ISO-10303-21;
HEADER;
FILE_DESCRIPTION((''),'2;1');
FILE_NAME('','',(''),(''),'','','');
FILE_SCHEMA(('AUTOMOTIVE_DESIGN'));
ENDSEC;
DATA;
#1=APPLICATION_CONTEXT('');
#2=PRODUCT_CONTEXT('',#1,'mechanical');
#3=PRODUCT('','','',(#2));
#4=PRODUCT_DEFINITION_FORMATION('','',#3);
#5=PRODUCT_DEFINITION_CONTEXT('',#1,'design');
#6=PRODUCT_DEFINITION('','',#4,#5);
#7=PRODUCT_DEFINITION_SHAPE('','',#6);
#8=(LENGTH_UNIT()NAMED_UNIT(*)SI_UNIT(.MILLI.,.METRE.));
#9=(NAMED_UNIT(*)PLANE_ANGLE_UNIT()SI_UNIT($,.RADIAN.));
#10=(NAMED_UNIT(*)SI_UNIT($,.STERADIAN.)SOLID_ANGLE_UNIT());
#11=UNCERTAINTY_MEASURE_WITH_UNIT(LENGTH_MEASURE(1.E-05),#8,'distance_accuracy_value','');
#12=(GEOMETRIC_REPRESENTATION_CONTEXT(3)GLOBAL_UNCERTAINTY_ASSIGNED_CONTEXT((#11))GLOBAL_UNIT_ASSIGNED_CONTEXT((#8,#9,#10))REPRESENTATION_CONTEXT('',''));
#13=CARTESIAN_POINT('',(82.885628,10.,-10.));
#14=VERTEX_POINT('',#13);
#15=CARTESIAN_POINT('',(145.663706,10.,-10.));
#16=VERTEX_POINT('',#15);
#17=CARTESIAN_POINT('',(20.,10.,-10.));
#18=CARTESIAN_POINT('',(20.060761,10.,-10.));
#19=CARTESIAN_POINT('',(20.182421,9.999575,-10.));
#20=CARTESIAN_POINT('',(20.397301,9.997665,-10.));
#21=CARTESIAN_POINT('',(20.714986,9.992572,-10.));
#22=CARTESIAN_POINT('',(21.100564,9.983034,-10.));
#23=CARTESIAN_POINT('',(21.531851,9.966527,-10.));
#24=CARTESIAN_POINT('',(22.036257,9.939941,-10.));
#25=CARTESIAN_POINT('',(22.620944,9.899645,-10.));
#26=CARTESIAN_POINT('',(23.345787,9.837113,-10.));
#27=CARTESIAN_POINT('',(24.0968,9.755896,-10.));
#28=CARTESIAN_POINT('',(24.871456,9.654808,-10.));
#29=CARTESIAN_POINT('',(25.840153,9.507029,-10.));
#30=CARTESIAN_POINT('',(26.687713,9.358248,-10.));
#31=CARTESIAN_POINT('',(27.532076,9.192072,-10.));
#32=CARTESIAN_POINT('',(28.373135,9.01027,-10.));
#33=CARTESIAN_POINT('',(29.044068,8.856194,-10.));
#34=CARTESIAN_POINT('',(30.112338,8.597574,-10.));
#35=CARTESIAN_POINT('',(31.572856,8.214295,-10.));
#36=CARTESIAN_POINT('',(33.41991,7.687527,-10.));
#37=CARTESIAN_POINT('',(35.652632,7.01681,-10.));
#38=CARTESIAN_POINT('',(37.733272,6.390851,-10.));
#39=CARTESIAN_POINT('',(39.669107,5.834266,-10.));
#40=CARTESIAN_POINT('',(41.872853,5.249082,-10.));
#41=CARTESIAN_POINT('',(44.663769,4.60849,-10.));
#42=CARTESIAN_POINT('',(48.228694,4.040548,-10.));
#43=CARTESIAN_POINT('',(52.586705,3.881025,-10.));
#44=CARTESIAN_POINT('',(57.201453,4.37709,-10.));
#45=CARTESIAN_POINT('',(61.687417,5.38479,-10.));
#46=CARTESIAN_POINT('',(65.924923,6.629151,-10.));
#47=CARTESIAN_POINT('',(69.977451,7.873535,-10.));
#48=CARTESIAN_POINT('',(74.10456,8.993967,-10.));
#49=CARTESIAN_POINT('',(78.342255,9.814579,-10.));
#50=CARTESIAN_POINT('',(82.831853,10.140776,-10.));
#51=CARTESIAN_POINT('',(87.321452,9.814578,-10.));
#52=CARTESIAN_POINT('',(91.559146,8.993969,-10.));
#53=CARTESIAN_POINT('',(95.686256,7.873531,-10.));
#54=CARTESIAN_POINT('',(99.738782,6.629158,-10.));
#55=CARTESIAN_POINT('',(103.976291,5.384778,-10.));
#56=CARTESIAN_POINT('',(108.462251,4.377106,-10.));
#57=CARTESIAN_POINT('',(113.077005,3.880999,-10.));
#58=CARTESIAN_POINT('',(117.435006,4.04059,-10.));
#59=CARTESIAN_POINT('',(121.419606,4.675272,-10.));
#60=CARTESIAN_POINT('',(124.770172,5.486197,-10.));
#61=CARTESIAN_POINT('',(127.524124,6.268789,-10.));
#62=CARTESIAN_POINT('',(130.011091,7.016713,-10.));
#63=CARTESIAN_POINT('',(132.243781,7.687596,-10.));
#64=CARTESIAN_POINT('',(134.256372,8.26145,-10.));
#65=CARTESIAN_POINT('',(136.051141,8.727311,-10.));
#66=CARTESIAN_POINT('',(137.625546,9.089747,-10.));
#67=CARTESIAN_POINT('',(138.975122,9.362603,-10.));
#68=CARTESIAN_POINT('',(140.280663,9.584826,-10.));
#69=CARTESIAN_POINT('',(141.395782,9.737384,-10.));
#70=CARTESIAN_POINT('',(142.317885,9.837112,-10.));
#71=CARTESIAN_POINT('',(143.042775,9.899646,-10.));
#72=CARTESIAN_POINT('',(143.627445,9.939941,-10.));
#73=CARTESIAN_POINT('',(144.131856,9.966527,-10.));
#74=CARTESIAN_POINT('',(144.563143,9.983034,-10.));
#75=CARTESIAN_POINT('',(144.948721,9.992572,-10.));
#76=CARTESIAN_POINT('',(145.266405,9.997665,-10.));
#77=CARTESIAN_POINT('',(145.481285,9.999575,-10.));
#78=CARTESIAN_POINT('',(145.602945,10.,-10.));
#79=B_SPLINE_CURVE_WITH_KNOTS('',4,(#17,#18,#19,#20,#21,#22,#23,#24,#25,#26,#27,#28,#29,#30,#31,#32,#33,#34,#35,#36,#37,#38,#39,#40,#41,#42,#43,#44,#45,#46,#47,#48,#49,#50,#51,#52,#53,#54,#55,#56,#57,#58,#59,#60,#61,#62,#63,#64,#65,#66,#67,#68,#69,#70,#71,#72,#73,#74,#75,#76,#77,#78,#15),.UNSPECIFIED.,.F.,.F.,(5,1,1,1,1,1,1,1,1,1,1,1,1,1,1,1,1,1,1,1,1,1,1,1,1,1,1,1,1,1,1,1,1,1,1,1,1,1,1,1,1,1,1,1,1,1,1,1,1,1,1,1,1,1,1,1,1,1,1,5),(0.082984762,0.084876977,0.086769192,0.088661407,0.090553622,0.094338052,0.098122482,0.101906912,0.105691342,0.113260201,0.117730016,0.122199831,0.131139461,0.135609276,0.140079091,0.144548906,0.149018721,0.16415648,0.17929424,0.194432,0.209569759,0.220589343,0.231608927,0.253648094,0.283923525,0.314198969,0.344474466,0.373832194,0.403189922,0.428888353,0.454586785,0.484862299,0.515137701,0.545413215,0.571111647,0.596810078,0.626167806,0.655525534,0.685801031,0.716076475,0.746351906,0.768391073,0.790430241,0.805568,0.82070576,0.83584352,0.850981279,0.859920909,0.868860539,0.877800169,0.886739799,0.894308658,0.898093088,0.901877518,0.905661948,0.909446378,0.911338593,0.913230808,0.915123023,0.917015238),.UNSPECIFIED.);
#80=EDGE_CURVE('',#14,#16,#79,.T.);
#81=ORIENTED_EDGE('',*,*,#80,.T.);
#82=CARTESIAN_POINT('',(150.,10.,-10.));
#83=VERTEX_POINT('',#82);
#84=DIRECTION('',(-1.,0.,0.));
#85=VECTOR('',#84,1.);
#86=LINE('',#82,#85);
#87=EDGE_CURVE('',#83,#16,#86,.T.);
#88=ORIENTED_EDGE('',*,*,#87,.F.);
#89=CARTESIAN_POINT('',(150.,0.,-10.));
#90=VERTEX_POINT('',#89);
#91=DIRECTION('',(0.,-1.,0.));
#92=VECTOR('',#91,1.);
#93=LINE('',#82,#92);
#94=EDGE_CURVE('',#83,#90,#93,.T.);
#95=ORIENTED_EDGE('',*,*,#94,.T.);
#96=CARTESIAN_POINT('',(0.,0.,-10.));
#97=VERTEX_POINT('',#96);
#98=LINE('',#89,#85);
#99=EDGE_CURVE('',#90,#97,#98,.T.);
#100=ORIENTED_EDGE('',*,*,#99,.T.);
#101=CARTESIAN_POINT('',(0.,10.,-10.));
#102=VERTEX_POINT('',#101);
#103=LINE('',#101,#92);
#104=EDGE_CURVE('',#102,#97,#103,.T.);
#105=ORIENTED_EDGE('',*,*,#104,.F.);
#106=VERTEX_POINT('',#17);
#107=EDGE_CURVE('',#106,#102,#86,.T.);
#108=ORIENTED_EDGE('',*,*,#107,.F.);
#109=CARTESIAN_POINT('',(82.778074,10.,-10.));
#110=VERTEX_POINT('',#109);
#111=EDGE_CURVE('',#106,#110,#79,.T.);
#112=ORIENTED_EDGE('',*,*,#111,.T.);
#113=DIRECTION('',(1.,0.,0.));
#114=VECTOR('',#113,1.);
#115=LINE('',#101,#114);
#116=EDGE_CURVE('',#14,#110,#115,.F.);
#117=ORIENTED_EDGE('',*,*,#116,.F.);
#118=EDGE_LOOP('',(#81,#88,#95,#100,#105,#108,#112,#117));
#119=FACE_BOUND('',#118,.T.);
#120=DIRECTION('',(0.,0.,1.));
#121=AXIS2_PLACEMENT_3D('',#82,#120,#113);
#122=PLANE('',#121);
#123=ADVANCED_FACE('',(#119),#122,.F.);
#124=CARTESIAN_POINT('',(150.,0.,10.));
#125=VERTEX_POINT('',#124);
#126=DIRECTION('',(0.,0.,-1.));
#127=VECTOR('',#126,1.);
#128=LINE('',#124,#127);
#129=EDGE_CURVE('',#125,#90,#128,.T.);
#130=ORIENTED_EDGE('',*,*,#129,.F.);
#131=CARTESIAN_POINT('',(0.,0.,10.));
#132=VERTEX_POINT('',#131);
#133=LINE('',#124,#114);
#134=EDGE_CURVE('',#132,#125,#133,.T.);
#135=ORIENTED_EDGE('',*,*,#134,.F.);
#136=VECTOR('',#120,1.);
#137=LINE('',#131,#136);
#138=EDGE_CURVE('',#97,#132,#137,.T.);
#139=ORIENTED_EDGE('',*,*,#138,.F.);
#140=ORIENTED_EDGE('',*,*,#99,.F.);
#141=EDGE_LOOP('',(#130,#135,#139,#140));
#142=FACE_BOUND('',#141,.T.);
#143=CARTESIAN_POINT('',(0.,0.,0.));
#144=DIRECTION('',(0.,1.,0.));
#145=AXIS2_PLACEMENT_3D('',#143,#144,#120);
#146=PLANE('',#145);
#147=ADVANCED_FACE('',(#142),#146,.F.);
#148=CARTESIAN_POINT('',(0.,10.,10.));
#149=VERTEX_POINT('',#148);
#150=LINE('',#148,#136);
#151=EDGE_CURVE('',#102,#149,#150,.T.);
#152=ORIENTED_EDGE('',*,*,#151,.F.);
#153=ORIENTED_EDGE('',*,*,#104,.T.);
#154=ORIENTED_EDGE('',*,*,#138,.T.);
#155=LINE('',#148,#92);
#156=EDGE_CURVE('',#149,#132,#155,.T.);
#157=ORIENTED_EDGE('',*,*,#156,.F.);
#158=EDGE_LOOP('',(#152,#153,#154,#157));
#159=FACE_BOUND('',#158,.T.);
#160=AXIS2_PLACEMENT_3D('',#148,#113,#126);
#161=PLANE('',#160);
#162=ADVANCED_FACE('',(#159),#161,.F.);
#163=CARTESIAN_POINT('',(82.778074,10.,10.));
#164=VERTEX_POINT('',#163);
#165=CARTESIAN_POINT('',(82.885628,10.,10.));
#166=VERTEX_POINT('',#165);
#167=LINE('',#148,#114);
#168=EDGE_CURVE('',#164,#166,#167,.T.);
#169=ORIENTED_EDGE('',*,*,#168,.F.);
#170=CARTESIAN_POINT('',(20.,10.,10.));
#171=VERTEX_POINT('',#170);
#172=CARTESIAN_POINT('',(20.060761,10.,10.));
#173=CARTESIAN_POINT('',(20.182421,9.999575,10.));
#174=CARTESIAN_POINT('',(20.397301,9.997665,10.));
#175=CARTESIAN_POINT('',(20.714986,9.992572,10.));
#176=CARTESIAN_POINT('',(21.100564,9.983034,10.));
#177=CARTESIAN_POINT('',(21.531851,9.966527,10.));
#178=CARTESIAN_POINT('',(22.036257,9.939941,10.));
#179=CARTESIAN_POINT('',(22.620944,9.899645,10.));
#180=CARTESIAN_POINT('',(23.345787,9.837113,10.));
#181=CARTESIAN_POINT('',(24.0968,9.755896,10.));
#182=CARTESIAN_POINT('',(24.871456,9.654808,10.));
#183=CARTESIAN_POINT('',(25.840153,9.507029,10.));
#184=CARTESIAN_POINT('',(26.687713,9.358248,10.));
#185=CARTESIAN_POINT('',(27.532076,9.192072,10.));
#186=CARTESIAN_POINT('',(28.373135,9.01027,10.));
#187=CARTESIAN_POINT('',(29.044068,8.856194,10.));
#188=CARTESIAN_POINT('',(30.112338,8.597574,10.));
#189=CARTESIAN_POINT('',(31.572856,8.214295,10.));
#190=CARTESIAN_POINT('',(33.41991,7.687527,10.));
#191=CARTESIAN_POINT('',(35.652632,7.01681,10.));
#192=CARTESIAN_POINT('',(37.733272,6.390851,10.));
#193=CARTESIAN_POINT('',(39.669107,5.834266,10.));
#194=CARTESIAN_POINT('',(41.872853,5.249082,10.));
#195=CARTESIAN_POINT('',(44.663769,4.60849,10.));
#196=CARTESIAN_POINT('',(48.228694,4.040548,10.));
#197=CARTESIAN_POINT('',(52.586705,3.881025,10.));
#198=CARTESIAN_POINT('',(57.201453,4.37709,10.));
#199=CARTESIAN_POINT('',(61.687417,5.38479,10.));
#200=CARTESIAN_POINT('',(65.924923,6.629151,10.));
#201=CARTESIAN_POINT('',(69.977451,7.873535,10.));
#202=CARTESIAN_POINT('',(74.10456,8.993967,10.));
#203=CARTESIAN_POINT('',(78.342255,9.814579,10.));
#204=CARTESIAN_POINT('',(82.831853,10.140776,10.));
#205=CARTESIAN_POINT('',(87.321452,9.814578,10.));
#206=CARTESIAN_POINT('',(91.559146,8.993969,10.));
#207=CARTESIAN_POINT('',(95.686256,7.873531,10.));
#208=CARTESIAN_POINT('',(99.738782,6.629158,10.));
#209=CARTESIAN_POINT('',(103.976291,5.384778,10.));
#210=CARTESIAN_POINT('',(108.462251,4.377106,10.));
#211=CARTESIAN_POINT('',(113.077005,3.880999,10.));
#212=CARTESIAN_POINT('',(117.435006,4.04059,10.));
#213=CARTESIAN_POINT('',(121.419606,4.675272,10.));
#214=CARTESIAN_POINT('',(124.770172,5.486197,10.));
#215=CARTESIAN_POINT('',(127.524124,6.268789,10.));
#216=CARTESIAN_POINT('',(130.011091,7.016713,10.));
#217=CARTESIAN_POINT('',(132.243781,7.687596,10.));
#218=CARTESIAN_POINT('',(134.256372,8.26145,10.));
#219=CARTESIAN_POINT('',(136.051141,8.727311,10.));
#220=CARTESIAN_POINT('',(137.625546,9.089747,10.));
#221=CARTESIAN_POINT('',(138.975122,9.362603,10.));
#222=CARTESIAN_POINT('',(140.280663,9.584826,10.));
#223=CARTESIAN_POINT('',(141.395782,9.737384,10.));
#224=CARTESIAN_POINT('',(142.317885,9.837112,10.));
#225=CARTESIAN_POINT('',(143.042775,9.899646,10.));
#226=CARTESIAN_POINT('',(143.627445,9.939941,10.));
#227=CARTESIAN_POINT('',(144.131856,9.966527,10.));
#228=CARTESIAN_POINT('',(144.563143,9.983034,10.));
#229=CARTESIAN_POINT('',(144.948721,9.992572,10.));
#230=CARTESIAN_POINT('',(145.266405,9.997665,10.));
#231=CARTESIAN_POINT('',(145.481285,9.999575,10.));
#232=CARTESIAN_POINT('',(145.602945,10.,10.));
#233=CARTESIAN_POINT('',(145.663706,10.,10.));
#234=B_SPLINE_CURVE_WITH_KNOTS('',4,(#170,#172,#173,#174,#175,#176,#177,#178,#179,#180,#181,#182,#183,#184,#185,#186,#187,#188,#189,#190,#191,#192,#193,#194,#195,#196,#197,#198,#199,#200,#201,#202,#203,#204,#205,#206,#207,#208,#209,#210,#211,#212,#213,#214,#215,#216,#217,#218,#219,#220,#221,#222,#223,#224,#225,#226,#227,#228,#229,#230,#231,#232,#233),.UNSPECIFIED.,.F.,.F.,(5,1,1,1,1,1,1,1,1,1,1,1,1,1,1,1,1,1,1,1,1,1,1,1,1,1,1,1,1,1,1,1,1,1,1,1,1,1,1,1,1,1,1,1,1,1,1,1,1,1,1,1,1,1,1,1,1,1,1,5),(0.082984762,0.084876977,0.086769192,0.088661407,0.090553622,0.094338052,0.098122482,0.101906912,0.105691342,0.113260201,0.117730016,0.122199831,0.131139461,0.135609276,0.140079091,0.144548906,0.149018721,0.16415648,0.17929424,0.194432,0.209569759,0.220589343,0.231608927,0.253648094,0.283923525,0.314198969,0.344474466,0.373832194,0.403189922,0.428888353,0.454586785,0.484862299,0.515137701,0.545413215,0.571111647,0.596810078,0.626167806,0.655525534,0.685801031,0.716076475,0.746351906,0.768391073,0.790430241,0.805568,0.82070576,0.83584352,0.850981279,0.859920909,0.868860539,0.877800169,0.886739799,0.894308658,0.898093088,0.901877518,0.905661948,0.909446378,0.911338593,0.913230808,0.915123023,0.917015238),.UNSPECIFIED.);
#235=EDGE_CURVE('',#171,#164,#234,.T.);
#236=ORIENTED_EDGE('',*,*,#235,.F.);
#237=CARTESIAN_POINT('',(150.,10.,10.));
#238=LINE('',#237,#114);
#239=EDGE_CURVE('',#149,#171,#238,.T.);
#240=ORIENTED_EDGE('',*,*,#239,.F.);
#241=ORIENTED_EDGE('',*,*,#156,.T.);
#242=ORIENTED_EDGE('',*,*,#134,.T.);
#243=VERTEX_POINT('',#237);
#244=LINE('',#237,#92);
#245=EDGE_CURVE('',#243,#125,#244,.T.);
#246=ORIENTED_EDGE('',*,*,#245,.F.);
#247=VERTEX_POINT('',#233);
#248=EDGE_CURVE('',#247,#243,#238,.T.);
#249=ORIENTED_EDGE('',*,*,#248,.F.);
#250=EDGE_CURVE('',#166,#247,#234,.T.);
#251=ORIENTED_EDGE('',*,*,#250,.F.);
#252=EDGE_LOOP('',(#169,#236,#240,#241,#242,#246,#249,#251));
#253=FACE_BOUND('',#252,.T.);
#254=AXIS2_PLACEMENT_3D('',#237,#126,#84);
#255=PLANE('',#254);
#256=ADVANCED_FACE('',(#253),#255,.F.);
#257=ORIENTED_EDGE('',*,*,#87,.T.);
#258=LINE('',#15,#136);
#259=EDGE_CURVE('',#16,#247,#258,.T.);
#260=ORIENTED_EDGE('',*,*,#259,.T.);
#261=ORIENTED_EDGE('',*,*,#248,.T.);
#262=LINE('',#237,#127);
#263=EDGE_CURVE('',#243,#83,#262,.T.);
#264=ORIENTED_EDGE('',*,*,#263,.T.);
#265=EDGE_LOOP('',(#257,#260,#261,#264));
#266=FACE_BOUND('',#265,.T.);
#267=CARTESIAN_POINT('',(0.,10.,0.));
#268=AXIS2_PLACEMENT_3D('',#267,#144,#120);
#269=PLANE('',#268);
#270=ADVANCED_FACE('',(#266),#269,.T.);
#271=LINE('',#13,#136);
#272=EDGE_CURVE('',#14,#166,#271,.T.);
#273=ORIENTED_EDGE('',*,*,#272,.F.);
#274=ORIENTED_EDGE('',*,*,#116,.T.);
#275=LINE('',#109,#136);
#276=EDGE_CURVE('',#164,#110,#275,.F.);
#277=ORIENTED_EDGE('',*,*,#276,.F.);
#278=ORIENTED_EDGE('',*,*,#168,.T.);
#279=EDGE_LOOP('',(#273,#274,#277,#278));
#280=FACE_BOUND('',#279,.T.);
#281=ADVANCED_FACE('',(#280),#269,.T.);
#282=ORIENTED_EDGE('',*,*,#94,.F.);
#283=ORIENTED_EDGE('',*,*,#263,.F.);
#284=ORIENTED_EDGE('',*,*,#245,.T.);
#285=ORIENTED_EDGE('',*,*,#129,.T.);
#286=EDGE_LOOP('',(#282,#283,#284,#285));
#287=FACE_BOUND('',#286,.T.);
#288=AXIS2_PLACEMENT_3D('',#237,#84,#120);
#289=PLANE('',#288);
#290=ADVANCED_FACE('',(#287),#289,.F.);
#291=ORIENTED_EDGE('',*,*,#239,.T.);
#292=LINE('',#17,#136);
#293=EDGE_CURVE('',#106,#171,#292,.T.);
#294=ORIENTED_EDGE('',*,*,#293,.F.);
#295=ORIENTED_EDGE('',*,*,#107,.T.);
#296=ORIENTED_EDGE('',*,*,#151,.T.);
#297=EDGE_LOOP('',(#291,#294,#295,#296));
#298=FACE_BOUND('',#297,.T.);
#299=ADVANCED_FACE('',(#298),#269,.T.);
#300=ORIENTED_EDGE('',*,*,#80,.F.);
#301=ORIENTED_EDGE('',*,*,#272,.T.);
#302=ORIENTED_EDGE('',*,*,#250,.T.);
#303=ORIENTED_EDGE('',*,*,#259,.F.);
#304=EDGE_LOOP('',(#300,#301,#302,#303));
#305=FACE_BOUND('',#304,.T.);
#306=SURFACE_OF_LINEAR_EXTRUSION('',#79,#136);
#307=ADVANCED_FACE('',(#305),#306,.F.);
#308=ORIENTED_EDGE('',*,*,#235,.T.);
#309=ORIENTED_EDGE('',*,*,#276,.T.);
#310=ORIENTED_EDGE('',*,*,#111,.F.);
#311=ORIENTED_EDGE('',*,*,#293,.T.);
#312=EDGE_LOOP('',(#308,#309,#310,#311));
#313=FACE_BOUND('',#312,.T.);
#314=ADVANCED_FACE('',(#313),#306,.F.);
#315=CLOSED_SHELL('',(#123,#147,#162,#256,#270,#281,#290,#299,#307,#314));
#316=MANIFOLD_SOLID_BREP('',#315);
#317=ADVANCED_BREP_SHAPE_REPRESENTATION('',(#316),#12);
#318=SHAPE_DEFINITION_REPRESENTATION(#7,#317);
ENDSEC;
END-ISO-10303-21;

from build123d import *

# Parameters (mm, degrees)
SKETCH1_W           = 150
SKETCH1_H           = 20
BOSS_EXTRUDE1_DEPTH = 10
CUT_EXTRUDE1_START  = -10
CUT_EXTRUDE1_DEPTH  = 20


# Read off the part's stored shape, not the designer's step: Cut-Extrude1
with BuildPart() as part:
    # Sketch1 → Boss-Extrude1 (new body)
    with BuildSketch(Plane(origin=(0, 0, 0), x_dir=(1, 0, 0), z_dir=(0, 1, 0))):
        with Locations((75, 0)):
            Rectangle(SKETCH1_W, SKETCH1_H)
    extrude(amount=BOSS_EXTRUDE1_DEPTH)

    # Cut-Extrude1 outline → Cut-Extrude1 (cut)
    with BuildSketch(Plane.XY.offset(CUT_EXTRUDE1_START)):
        with BuildLine():
            Line((145.663706144, 10), (82.885627876, 10))
            add(Edge.make_bspline(
                [(82.885627876, 10), (83.454977242, 9.99908028), (85.189856894, 9.956715888), (87.907695594, 9.701054679), (91.559145724, 8.993968627), (95.686256106, 7.87353082), (99.738781969, 6.629157705), (103.976290755, 5.384778121), (108.462250932, 4.377105952), (113.07700456, 3.880999352), (117.435005853, 4.040590194), (121.419605992, 4.675271787), (124.770171836, 5.486196921), (127.524123563, 6.268788566), (130.011090761, 7.016713264), (132.243780847, 7.687596399), (134.256371731, 8.261450185), (136.051140973, 8.727311429), (137.62554634, 9.089746646), (138.975122408, 9.362602964), (140.280663194, 9.584826082), (141.395781757, 9.73738392), (142.317885087, 9.837112449), (143.042775212, 9.899645746), (143.62744465, 9.939940775), (144.131855587, 9.966526877), (144.563142562, 9.98303354), (144.948720651, 9.992572398), (145.266405122, 9.997664685), (145.481284706, 9.999575397), (145.602944701, 10), (145.663706144, 10)],
                knots=[0.500349192, 0.500349192, 0.500349192, 0.500349192, 0.500349192, 0.515137701, 0.545413215, 0.571111647, 0.596810078, 0.626167806, 0.655525534, 0.685801031, 0.716076475, 0.746351906, 0.768391073, 0.790430241, 0.805568, 0.82070576, 0.83584352, 0.850981279, 0.859920909, 0.868860539, 0.877800169, 0.886739799, 0.894308658, 0.898093088, 0.901877518, 0.905661948, 0.909446378, 0.911338593, 0.913230808, 0.915123023, 0.917015238, 0.917015238, 0.917015238, 0.917015238, 0.917015238], degree=4))
        make_face()
        with BuildLine():
            add(Edge.make_bspline(
                [(20, 10), (20.060761442, 10), (20.182421455, 9.999575397), (20.39730103, 9.997664685), (20.714985555, 9.992572396), (21.100563711, 9.983033535), (21.531850968, 9.966526863), (22.036257221, 9.939940915), (22.620943851, 9.899645334), (23.345787497, 9.837113466), (24.096799885, 9.755896382), (24.871456236, 9.654807845), (25.840152712, 9.50702943), (26.68771304, 9.358248058), (27.532076328, 9.192071608), (28.373135333, 9.010270215), (29.044068, 8.856194438), (30.112337945, 8.597574089), (31.5728561, 8.214295395), (33.419910315, 7.687526736), (35.652632055, 7.016810348), (37.733272252, 6.390851426), (39.669106538, 5.834266358), (41.872853105, 5.249081541), (44.663768524, 4.608489653), (48.228694342, 4.040548399), (52.586705214, 3.881024842), (57.20145294, 4.377090051), (61.687417049, 5.384789657), (65.924923136, 6.629150647), (69.977450635, 7.873534607), (74.104560079, 8.993966893), (77.756009619, 9.701054871), (80.473847019, 9.956715992), (82.208725521, 9.999080282), (82.77807377, 10)],
                knots=[0.082984762, 0.082984762, 0.082984762, 0.082984762, 0.082984762, 0.084876977, 0.086769192, 0.088661407, 0.090553622, 0.094338052, 0.098122482, 0.101906912, 0.105691342, 0.113260201, 0.117730016, 0.122199831, 0.131139461, 0.135609276, 0.140079091, 0.144548906, 0.149018721, 0.16415648, 0.17929424, 0.194432, 0.209569759, 0.220589343, 0.231608927, 0.253648094, 0.283923525, 0.314198969, 0.344474466, 0.373832194, 0.403189922, 0.428888353, 0.454586785, 0.484862299, 0.499650779, 0.499650779, 0.499650779, 0.499650779, 0.499650779], degree=4))
            Line((82.77807377, 10), (20, 10))
        make_face()
    extrude(amount=CUT_EXTRUDE1_DEPTH, mode=Mode.SUBTRACT)


solid = part.part
